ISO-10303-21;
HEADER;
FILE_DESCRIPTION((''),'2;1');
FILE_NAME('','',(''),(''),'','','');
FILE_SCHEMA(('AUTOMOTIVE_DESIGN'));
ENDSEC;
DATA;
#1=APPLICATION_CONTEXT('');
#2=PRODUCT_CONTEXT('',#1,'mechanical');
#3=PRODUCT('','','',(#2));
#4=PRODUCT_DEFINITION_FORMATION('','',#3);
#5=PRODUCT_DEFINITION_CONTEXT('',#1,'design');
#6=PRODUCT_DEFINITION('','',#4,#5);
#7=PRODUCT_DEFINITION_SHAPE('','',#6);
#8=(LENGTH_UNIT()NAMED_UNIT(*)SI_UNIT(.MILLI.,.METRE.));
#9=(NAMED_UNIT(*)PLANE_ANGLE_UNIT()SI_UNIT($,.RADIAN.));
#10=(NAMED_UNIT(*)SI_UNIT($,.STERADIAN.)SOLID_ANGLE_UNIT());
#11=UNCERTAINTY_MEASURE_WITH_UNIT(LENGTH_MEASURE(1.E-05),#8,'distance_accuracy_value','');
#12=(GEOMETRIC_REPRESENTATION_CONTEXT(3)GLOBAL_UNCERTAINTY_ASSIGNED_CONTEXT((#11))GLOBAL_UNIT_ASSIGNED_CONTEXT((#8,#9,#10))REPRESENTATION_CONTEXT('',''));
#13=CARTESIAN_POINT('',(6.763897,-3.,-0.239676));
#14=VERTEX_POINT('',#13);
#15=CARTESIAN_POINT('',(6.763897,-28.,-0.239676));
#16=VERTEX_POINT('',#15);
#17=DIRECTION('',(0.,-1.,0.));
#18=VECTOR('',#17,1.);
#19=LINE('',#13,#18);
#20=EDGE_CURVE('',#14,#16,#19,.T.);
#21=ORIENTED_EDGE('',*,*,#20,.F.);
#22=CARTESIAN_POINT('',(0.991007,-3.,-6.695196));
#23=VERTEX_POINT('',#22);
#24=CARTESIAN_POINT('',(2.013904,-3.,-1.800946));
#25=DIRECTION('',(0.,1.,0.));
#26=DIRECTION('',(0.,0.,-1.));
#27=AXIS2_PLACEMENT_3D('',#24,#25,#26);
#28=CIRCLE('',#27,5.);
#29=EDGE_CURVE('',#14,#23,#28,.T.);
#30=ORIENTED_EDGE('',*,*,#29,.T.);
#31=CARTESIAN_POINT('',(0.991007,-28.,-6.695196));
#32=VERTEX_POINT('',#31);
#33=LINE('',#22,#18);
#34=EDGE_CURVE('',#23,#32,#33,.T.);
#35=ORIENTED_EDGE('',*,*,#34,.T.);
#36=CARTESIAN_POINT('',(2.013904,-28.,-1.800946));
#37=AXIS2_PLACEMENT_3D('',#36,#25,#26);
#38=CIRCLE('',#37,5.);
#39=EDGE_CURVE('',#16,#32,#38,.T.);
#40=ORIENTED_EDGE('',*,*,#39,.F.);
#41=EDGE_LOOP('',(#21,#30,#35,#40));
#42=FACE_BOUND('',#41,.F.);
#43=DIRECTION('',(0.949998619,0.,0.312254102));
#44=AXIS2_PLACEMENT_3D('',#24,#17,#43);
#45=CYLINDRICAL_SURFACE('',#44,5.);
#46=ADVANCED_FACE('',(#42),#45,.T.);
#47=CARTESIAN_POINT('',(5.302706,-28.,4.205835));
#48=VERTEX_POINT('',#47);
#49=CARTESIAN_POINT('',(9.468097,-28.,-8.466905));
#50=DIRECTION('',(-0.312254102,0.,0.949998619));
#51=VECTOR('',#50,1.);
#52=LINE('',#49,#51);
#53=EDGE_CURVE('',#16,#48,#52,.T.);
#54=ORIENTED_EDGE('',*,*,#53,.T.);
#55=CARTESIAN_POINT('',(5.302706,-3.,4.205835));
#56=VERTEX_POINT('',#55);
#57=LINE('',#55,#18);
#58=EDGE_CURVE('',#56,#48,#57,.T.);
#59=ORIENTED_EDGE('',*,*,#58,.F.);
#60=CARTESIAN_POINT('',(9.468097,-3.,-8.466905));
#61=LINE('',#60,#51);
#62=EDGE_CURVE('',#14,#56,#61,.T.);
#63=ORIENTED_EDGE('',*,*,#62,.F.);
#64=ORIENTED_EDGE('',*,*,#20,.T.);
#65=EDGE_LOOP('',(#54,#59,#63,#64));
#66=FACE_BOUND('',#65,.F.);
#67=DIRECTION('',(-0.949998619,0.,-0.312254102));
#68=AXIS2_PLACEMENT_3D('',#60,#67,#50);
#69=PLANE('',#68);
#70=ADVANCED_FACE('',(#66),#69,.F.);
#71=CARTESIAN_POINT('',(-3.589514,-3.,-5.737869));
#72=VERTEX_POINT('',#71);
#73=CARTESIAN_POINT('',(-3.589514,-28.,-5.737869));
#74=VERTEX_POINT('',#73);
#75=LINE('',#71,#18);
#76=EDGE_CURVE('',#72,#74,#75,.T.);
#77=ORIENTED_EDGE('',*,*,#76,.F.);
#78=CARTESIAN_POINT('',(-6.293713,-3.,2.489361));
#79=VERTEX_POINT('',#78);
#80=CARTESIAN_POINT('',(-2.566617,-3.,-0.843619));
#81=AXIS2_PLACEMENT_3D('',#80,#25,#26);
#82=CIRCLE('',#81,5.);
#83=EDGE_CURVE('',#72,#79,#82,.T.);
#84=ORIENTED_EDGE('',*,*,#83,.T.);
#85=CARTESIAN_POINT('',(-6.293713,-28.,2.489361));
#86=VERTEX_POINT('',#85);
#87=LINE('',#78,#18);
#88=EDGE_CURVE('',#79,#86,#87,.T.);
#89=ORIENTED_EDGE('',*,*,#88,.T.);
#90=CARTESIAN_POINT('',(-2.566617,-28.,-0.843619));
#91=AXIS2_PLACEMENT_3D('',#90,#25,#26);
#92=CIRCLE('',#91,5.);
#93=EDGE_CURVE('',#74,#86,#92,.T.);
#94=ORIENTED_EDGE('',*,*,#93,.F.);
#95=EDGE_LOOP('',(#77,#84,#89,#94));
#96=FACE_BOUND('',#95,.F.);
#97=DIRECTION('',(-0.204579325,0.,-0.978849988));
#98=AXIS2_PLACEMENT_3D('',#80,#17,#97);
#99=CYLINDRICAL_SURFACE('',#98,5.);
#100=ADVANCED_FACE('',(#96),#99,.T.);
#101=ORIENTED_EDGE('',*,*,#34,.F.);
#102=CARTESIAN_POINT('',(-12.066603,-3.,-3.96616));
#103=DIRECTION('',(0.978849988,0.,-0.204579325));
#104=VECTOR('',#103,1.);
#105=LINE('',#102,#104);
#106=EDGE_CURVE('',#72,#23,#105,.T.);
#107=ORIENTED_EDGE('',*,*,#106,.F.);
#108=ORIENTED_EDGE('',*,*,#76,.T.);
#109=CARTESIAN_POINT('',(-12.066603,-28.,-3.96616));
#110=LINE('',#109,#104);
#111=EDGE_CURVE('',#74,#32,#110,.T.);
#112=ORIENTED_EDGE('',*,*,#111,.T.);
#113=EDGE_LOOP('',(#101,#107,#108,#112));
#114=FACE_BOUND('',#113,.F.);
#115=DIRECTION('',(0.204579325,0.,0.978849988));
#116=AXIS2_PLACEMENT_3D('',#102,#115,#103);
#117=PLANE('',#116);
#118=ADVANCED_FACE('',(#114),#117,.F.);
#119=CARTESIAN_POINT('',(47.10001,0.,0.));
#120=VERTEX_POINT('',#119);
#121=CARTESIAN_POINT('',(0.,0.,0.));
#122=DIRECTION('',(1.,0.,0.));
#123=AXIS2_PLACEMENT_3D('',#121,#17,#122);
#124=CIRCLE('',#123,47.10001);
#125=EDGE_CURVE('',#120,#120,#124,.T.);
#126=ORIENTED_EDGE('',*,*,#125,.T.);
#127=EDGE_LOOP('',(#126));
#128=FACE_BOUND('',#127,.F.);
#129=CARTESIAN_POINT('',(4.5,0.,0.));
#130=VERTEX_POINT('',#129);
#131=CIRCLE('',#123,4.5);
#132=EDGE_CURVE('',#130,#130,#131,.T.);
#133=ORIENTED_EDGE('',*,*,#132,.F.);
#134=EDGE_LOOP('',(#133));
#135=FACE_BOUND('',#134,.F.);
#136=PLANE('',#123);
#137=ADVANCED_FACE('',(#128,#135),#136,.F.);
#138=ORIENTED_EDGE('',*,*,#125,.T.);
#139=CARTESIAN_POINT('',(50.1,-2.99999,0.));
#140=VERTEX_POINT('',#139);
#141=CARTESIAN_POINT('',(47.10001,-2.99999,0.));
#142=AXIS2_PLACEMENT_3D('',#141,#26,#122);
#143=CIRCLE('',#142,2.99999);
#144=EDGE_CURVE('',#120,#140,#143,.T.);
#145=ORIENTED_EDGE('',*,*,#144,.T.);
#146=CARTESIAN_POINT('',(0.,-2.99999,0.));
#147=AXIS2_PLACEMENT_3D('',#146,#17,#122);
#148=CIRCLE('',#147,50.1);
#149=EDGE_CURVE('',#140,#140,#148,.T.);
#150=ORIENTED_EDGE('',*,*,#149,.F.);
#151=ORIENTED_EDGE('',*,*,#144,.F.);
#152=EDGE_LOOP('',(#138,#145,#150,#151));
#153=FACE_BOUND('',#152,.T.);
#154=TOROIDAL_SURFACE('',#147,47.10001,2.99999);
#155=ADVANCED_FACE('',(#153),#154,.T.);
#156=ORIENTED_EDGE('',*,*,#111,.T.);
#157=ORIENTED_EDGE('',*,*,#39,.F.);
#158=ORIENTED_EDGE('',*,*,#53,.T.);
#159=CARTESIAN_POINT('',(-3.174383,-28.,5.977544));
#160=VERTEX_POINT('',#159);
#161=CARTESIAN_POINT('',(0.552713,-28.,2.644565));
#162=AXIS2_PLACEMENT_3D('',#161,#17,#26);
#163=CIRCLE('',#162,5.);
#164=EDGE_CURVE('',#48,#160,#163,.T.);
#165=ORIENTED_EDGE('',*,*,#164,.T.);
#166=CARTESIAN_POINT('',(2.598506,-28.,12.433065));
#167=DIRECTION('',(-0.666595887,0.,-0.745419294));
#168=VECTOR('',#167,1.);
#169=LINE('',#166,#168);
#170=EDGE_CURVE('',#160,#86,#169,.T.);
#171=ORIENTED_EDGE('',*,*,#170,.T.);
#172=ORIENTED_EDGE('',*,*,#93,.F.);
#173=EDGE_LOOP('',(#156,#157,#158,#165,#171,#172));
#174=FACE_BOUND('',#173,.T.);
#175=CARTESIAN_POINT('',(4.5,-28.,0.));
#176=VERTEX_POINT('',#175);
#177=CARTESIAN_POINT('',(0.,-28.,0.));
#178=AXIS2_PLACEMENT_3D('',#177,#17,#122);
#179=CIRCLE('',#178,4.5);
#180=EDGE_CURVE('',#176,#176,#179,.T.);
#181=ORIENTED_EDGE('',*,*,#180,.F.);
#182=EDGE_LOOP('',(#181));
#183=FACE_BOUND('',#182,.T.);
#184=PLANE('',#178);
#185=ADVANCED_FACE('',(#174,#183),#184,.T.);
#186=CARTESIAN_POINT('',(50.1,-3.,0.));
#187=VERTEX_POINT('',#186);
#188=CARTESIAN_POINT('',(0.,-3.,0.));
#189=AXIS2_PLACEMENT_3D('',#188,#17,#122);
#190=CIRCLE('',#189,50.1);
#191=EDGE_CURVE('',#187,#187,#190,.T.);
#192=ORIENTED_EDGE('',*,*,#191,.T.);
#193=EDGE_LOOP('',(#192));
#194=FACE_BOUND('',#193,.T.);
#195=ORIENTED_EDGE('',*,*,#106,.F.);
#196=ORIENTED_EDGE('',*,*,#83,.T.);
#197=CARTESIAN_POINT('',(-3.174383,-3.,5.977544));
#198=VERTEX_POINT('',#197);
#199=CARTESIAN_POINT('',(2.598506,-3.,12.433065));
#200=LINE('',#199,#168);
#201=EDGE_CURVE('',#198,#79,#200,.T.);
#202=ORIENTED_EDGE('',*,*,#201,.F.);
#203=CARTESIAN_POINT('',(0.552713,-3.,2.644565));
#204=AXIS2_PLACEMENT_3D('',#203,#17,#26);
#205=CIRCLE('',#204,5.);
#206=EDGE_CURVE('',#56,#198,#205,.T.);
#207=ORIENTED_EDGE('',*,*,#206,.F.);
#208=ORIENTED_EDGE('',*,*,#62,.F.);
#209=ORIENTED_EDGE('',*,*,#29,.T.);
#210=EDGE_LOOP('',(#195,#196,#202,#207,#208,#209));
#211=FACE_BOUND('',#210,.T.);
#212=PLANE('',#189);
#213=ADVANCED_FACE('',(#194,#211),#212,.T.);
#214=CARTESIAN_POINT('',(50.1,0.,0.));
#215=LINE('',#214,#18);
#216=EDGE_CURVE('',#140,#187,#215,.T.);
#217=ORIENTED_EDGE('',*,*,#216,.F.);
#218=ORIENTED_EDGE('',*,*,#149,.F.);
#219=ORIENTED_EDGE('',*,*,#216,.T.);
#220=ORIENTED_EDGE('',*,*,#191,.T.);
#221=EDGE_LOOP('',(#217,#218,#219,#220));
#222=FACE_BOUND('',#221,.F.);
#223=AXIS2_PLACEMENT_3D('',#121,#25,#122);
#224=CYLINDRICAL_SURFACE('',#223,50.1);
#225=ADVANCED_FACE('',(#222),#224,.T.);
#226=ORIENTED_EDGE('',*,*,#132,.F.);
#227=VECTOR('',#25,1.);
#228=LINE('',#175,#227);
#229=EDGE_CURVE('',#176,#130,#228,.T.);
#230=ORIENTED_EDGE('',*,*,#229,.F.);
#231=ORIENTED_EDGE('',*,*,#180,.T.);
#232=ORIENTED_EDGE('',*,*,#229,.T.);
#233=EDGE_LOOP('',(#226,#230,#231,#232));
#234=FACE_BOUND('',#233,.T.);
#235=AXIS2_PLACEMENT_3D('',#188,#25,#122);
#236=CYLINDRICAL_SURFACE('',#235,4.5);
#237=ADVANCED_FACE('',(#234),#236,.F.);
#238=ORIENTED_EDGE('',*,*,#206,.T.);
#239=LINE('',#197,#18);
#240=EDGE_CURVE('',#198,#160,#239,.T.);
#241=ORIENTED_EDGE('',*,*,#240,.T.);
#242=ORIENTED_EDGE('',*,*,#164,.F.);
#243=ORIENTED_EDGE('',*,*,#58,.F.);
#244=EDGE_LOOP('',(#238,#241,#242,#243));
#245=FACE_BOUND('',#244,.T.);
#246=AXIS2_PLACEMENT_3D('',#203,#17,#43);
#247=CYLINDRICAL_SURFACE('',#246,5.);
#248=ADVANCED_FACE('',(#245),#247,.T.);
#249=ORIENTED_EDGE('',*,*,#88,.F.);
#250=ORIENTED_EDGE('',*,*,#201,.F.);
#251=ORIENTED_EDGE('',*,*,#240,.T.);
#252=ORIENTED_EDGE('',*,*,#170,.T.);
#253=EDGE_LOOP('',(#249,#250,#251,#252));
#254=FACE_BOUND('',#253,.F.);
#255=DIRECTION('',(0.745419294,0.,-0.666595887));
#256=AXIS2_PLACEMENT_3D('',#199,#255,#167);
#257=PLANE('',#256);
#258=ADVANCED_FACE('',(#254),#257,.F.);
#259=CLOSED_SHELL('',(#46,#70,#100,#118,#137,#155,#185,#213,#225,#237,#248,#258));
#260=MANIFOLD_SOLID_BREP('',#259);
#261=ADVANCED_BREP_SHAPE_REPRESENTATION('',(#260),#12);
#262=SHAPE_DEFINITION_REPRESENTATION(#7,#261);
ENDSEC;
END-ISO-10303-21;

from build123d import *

# Parameters (mm, degrees)
F0_R     = 50.1
F0_R_2   = 4.5
F1_DEPTH = 3
F2_R     = 4.5
F3_DEPTH = 25
F4_R     = 2.99999
F5_R     = 5


# Not quite as in the source:
# - a fillet or chamfer is up to 0.001 mm smaller than in the source, because OpenCascade refuses the exact size


with BuildPart() as f1:
    # F0 (on Front) → F1 (new body)
    with BuildSketch(Plane.XZ):
        Circle(F0_R)
        Circle(F0_R_2, mode=Mode.SUBTRACT)
    extrude(amount=F1_DEPTH)

    # F2 (on face) → F3 (join)
    with BuildSketch(Plane.XZ.offset(3)):
        Polygon((9.4680966624, -8.46690492), (2.598506421, 12.4330646951), (-12.0666030834, -3.9661597751), align=None)
        Circle(F2_R, mode=Mode.SUBTRACT)
    extrude(amount=F3_DEPTH)

    # F4 (radius 3 in the source; OpenCascade refuses exactly that, so slightly less here)
    f4_edges = [f1.edges().sort_by_distance(p)[0] for p in [
        (-50.1, 0, 0),
    ]]
    fillet(f4_edges, radius=F4_R)

    # F5
    f5_edges = [f1.edges().sort_by_distance(p)[0] for p in [
        (2.598506, -15.5, 12.433065),
        (-12.066603, -15.5, -3.96616),
        (9.468097, -15.5, -8.466905),
    ]]
    fillet(f5_edges, radius=F5_R)


solid = f1.part
